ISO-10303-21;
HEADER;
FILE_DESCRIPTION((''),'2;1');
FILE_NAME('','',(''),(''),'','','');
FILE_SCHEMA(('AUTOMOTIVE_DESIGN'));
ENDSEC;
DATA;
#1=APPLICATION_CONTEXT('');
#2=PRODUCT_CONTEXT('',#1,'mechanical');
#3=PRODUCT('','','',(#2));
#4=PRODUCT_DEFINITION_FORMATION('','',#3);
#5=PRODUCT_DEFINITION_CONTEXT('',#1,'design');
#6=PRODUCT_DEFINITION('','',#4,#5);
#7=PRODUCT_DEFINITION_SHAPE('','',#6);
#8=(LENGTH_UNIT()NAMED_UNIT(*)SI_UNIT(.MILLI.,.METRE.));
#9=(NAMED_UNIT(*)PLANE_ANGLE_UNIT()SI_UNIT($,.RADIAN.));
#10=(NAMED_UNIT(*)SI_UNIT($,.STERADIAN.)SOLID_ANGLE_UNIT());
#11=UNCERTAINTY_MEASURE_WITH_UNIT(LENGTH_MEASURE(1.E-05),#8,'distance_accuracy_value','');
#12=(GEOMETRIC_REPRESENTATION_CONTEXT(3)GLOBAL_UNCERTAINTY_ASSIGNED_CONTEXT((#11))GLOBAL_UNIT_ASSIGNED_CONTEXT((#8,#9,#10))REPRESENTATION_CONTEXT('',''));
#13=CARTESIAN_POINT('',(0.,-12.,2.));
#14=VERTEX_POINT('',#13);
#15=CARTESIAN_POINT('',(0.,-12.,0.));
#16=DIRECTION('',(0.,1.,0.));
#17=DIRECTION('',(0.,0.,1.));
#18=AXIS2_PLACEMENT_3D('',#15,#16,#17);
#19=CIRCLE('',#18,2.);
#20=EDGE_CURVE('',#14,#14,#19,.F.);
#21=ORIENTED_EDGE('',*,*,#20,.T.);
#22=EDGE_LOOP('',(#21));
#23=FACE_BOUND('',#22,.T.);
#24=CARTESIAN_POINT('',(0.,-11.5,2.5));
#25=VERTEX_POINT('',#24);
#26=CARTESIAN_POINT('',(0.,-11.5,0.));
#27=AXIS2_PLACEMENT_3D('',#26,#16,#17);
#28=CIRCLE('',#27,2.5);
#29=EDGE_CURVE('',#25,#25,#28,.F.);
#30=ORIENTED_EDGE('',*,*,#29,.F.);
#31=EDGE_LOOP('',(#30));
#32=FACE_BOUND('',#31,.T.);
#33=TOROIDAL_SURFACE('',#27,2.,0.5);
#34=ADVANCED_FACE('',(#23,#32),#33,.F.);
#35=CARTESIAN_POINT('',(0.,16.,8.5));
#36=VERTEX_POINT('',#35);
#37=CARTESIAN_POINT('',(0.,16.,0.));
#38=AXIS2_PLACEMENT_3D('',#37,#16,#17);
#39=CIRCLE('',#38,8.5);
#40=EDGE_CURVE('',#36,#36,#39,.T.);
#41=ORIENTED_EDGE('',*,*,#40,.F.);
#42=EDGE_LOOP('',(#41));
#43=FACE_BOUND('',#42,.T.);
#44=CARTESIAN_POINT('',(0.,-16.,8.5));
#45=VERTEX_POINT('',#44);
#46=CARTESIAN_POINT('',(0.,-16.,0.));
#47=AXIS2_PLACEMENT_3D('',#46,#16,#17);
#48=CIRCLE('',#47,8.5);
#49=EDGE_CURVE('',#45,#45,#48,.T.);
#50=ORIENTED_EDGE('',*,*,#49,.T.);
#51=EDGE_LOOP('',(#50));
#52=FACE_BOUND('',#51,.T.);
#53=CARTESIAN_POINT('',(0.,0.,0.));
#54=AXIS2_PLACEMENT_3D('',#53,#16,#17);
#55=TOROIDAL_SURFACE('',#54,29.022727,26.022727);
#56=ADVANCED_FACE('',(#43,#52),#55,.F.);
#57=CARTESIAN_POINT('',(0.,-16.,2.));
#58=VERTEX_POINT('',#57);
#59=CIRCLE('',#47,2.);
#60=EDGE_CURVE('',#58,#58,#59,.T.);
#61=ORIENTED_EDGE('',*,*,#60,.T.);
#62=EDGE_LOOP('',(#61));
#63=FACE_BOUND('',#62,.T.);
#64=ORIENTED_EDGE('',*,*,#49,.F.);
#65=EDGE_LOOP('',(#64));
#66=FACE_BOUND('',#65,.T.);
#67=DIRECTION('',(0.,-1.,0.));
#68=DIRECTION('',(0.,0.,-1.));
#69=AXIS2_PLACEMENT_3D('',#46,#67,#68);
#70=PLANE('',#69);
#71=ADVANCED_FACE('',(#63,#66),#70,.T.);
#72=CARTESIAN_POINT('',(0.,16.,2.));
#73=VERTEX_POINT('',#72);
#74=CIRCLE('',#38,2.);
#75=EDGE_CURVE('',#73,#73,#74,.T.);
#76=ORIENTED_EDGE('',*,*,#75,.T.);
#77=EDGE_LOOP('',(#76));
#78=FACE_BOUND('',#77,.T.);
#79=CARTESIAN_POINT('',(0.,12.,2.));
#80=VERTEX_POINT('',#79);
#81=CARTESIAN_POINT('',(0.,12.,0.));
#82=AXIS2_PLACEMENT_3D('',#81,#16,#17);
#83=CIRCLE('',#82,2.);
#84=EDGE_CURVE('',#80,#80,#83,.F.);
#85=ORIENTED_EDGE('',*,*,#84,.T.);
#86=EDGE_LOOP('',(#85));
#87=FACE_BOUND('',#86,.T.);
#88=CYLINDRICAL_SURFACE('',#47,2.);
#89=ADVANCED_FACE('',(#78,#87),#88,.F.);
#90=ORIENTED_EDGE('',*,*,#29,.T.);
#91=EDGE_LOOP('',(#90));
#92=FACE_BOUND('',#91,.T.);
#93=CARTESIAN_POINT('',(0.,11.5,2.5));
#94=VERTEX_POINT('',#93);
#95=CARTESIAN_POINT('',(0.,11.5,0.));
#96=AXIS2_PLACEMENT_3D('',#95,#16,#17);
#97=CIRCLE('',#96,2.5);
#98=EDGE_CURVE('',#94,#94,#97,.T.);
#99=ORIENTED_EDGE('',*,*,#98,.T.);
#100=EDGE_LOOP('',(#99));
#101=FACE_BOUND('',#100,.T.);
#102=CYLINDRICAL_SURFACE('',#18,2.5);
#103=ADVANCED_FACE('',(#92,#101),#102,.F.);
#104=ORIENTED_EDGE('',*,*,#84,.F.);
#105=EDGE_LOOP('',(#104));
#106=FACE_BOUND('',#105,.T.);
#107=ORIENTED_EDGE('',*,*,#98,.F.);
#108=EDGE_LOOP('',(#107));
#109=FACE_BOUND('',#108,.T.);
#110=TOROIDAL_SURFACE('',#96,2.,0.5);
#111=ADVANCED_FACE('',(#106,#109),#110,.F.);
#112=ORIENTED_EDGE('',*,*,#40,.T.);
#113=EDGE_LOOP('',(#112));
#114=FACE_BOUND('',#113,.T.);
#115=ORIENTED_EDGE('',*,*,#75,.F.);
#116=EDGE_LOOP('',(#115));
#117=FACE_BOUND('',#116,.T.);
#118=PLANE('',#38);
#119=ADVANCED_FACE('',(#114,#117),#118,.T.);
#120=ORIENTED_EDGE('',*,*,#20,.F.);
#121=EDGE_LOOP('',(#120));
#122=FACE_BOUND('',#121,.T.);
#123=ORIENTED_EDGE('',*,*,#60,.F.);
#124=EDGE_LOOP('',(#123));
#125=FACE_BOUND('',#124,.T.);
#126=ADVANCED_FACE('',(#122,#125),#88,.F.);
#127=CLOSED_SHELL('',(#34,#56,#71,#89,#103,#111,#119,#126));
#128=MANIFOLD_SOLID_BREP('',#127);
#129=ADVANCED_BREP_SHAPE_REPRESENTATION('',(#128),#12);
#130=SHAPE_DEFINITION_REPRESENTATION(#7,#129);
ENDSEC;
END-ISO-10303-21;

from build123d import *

# Parameters (mm, degrees)
SKETCH1_W          = 3
SKETCH1_H          = 32
SKETCH2_R          = 2
CUT_EXTRUDE1_DEPTH = 35.18332927
CUT_EXTRUDE2_START = -4
SKETCH3_R          = 2.5
CUT_EXTRUDE2_DEPTH = 24
FILLET1_R          = 0.5


with BuildPart() as part:
    # Sketch1 → Revolve1 (revolve)
    with BuildSketch(Plane.XY, mode=Mode.PRIVATE) as revolve1_sk:
        with BuildLine():
            Line((-3, -7e-08), (-3, 16))
            Line((-3, 16), (-8.5, 16))
            ThreePointArc((-8.5, 16), (-4.413382802, 8.459462125), (-3, -7e-08))
        make_face()
        with Locations((-1.5, 0)):
            Rectangle(SKETCH1_W, SKETCH1_H)
        with BuildLine():
            Line((-8.5, -16), (-3, -16))
            Line((-3, -16), (-3, -7e-08))
            ThreePointArc((-3, -7e-08), (-4.413382825, -8.459462191), (-8.5, -16))
        make_face()
    revolve(revolve1_sk.sketch.rotate(Axis((0, 16, 0), (0, -1, 0)), 270), axis=Axis((0, 16, 0), (0, -1, 0)))

    # Sketch2 → Cut-Extrude1 (cut, through all)
    with BuildSketch(Plane(origin=(0, 16, 0), x_dir=(1, 0, 0), z_dir=(0, 1, 0))):
        with Locations(Location((0, 0, 0), (0, 0, 270))):
            Circle(SKETCH2_R)
    extrude(amount=-CUT_EXTRUDE1_DEPTH, mode=Mode.SUBTRACT)

    # Sketch3 → Cut-Extrude2 (cut)
    with BuildSketch(Plane(origin=(0, 16, 0), x_dir=(1, 0, 0), z_dir=(0, 1, 0)).offset(CUT_EXTRUDE2_START)):
        with Locations(Location((0, 0, 0), (0, 0, 270))):
            Circle(SKETCH3_R)
    extrude(amount=-CUT_EXTRUDE2_DEPTH, mode=Mode.SUBTRACT)

    # Fillet1
    fillet1_edges = [part.edges().sort_by_distance(p)[0] for p in [
        (0, 12, -2.5),
        (0, -12, -2.5),
    ]]
    fillet(fillet1_edges, radius=FILLET1_R - 0.0001)  # a hair under: the kernel refuses the full size


solid = part.part
